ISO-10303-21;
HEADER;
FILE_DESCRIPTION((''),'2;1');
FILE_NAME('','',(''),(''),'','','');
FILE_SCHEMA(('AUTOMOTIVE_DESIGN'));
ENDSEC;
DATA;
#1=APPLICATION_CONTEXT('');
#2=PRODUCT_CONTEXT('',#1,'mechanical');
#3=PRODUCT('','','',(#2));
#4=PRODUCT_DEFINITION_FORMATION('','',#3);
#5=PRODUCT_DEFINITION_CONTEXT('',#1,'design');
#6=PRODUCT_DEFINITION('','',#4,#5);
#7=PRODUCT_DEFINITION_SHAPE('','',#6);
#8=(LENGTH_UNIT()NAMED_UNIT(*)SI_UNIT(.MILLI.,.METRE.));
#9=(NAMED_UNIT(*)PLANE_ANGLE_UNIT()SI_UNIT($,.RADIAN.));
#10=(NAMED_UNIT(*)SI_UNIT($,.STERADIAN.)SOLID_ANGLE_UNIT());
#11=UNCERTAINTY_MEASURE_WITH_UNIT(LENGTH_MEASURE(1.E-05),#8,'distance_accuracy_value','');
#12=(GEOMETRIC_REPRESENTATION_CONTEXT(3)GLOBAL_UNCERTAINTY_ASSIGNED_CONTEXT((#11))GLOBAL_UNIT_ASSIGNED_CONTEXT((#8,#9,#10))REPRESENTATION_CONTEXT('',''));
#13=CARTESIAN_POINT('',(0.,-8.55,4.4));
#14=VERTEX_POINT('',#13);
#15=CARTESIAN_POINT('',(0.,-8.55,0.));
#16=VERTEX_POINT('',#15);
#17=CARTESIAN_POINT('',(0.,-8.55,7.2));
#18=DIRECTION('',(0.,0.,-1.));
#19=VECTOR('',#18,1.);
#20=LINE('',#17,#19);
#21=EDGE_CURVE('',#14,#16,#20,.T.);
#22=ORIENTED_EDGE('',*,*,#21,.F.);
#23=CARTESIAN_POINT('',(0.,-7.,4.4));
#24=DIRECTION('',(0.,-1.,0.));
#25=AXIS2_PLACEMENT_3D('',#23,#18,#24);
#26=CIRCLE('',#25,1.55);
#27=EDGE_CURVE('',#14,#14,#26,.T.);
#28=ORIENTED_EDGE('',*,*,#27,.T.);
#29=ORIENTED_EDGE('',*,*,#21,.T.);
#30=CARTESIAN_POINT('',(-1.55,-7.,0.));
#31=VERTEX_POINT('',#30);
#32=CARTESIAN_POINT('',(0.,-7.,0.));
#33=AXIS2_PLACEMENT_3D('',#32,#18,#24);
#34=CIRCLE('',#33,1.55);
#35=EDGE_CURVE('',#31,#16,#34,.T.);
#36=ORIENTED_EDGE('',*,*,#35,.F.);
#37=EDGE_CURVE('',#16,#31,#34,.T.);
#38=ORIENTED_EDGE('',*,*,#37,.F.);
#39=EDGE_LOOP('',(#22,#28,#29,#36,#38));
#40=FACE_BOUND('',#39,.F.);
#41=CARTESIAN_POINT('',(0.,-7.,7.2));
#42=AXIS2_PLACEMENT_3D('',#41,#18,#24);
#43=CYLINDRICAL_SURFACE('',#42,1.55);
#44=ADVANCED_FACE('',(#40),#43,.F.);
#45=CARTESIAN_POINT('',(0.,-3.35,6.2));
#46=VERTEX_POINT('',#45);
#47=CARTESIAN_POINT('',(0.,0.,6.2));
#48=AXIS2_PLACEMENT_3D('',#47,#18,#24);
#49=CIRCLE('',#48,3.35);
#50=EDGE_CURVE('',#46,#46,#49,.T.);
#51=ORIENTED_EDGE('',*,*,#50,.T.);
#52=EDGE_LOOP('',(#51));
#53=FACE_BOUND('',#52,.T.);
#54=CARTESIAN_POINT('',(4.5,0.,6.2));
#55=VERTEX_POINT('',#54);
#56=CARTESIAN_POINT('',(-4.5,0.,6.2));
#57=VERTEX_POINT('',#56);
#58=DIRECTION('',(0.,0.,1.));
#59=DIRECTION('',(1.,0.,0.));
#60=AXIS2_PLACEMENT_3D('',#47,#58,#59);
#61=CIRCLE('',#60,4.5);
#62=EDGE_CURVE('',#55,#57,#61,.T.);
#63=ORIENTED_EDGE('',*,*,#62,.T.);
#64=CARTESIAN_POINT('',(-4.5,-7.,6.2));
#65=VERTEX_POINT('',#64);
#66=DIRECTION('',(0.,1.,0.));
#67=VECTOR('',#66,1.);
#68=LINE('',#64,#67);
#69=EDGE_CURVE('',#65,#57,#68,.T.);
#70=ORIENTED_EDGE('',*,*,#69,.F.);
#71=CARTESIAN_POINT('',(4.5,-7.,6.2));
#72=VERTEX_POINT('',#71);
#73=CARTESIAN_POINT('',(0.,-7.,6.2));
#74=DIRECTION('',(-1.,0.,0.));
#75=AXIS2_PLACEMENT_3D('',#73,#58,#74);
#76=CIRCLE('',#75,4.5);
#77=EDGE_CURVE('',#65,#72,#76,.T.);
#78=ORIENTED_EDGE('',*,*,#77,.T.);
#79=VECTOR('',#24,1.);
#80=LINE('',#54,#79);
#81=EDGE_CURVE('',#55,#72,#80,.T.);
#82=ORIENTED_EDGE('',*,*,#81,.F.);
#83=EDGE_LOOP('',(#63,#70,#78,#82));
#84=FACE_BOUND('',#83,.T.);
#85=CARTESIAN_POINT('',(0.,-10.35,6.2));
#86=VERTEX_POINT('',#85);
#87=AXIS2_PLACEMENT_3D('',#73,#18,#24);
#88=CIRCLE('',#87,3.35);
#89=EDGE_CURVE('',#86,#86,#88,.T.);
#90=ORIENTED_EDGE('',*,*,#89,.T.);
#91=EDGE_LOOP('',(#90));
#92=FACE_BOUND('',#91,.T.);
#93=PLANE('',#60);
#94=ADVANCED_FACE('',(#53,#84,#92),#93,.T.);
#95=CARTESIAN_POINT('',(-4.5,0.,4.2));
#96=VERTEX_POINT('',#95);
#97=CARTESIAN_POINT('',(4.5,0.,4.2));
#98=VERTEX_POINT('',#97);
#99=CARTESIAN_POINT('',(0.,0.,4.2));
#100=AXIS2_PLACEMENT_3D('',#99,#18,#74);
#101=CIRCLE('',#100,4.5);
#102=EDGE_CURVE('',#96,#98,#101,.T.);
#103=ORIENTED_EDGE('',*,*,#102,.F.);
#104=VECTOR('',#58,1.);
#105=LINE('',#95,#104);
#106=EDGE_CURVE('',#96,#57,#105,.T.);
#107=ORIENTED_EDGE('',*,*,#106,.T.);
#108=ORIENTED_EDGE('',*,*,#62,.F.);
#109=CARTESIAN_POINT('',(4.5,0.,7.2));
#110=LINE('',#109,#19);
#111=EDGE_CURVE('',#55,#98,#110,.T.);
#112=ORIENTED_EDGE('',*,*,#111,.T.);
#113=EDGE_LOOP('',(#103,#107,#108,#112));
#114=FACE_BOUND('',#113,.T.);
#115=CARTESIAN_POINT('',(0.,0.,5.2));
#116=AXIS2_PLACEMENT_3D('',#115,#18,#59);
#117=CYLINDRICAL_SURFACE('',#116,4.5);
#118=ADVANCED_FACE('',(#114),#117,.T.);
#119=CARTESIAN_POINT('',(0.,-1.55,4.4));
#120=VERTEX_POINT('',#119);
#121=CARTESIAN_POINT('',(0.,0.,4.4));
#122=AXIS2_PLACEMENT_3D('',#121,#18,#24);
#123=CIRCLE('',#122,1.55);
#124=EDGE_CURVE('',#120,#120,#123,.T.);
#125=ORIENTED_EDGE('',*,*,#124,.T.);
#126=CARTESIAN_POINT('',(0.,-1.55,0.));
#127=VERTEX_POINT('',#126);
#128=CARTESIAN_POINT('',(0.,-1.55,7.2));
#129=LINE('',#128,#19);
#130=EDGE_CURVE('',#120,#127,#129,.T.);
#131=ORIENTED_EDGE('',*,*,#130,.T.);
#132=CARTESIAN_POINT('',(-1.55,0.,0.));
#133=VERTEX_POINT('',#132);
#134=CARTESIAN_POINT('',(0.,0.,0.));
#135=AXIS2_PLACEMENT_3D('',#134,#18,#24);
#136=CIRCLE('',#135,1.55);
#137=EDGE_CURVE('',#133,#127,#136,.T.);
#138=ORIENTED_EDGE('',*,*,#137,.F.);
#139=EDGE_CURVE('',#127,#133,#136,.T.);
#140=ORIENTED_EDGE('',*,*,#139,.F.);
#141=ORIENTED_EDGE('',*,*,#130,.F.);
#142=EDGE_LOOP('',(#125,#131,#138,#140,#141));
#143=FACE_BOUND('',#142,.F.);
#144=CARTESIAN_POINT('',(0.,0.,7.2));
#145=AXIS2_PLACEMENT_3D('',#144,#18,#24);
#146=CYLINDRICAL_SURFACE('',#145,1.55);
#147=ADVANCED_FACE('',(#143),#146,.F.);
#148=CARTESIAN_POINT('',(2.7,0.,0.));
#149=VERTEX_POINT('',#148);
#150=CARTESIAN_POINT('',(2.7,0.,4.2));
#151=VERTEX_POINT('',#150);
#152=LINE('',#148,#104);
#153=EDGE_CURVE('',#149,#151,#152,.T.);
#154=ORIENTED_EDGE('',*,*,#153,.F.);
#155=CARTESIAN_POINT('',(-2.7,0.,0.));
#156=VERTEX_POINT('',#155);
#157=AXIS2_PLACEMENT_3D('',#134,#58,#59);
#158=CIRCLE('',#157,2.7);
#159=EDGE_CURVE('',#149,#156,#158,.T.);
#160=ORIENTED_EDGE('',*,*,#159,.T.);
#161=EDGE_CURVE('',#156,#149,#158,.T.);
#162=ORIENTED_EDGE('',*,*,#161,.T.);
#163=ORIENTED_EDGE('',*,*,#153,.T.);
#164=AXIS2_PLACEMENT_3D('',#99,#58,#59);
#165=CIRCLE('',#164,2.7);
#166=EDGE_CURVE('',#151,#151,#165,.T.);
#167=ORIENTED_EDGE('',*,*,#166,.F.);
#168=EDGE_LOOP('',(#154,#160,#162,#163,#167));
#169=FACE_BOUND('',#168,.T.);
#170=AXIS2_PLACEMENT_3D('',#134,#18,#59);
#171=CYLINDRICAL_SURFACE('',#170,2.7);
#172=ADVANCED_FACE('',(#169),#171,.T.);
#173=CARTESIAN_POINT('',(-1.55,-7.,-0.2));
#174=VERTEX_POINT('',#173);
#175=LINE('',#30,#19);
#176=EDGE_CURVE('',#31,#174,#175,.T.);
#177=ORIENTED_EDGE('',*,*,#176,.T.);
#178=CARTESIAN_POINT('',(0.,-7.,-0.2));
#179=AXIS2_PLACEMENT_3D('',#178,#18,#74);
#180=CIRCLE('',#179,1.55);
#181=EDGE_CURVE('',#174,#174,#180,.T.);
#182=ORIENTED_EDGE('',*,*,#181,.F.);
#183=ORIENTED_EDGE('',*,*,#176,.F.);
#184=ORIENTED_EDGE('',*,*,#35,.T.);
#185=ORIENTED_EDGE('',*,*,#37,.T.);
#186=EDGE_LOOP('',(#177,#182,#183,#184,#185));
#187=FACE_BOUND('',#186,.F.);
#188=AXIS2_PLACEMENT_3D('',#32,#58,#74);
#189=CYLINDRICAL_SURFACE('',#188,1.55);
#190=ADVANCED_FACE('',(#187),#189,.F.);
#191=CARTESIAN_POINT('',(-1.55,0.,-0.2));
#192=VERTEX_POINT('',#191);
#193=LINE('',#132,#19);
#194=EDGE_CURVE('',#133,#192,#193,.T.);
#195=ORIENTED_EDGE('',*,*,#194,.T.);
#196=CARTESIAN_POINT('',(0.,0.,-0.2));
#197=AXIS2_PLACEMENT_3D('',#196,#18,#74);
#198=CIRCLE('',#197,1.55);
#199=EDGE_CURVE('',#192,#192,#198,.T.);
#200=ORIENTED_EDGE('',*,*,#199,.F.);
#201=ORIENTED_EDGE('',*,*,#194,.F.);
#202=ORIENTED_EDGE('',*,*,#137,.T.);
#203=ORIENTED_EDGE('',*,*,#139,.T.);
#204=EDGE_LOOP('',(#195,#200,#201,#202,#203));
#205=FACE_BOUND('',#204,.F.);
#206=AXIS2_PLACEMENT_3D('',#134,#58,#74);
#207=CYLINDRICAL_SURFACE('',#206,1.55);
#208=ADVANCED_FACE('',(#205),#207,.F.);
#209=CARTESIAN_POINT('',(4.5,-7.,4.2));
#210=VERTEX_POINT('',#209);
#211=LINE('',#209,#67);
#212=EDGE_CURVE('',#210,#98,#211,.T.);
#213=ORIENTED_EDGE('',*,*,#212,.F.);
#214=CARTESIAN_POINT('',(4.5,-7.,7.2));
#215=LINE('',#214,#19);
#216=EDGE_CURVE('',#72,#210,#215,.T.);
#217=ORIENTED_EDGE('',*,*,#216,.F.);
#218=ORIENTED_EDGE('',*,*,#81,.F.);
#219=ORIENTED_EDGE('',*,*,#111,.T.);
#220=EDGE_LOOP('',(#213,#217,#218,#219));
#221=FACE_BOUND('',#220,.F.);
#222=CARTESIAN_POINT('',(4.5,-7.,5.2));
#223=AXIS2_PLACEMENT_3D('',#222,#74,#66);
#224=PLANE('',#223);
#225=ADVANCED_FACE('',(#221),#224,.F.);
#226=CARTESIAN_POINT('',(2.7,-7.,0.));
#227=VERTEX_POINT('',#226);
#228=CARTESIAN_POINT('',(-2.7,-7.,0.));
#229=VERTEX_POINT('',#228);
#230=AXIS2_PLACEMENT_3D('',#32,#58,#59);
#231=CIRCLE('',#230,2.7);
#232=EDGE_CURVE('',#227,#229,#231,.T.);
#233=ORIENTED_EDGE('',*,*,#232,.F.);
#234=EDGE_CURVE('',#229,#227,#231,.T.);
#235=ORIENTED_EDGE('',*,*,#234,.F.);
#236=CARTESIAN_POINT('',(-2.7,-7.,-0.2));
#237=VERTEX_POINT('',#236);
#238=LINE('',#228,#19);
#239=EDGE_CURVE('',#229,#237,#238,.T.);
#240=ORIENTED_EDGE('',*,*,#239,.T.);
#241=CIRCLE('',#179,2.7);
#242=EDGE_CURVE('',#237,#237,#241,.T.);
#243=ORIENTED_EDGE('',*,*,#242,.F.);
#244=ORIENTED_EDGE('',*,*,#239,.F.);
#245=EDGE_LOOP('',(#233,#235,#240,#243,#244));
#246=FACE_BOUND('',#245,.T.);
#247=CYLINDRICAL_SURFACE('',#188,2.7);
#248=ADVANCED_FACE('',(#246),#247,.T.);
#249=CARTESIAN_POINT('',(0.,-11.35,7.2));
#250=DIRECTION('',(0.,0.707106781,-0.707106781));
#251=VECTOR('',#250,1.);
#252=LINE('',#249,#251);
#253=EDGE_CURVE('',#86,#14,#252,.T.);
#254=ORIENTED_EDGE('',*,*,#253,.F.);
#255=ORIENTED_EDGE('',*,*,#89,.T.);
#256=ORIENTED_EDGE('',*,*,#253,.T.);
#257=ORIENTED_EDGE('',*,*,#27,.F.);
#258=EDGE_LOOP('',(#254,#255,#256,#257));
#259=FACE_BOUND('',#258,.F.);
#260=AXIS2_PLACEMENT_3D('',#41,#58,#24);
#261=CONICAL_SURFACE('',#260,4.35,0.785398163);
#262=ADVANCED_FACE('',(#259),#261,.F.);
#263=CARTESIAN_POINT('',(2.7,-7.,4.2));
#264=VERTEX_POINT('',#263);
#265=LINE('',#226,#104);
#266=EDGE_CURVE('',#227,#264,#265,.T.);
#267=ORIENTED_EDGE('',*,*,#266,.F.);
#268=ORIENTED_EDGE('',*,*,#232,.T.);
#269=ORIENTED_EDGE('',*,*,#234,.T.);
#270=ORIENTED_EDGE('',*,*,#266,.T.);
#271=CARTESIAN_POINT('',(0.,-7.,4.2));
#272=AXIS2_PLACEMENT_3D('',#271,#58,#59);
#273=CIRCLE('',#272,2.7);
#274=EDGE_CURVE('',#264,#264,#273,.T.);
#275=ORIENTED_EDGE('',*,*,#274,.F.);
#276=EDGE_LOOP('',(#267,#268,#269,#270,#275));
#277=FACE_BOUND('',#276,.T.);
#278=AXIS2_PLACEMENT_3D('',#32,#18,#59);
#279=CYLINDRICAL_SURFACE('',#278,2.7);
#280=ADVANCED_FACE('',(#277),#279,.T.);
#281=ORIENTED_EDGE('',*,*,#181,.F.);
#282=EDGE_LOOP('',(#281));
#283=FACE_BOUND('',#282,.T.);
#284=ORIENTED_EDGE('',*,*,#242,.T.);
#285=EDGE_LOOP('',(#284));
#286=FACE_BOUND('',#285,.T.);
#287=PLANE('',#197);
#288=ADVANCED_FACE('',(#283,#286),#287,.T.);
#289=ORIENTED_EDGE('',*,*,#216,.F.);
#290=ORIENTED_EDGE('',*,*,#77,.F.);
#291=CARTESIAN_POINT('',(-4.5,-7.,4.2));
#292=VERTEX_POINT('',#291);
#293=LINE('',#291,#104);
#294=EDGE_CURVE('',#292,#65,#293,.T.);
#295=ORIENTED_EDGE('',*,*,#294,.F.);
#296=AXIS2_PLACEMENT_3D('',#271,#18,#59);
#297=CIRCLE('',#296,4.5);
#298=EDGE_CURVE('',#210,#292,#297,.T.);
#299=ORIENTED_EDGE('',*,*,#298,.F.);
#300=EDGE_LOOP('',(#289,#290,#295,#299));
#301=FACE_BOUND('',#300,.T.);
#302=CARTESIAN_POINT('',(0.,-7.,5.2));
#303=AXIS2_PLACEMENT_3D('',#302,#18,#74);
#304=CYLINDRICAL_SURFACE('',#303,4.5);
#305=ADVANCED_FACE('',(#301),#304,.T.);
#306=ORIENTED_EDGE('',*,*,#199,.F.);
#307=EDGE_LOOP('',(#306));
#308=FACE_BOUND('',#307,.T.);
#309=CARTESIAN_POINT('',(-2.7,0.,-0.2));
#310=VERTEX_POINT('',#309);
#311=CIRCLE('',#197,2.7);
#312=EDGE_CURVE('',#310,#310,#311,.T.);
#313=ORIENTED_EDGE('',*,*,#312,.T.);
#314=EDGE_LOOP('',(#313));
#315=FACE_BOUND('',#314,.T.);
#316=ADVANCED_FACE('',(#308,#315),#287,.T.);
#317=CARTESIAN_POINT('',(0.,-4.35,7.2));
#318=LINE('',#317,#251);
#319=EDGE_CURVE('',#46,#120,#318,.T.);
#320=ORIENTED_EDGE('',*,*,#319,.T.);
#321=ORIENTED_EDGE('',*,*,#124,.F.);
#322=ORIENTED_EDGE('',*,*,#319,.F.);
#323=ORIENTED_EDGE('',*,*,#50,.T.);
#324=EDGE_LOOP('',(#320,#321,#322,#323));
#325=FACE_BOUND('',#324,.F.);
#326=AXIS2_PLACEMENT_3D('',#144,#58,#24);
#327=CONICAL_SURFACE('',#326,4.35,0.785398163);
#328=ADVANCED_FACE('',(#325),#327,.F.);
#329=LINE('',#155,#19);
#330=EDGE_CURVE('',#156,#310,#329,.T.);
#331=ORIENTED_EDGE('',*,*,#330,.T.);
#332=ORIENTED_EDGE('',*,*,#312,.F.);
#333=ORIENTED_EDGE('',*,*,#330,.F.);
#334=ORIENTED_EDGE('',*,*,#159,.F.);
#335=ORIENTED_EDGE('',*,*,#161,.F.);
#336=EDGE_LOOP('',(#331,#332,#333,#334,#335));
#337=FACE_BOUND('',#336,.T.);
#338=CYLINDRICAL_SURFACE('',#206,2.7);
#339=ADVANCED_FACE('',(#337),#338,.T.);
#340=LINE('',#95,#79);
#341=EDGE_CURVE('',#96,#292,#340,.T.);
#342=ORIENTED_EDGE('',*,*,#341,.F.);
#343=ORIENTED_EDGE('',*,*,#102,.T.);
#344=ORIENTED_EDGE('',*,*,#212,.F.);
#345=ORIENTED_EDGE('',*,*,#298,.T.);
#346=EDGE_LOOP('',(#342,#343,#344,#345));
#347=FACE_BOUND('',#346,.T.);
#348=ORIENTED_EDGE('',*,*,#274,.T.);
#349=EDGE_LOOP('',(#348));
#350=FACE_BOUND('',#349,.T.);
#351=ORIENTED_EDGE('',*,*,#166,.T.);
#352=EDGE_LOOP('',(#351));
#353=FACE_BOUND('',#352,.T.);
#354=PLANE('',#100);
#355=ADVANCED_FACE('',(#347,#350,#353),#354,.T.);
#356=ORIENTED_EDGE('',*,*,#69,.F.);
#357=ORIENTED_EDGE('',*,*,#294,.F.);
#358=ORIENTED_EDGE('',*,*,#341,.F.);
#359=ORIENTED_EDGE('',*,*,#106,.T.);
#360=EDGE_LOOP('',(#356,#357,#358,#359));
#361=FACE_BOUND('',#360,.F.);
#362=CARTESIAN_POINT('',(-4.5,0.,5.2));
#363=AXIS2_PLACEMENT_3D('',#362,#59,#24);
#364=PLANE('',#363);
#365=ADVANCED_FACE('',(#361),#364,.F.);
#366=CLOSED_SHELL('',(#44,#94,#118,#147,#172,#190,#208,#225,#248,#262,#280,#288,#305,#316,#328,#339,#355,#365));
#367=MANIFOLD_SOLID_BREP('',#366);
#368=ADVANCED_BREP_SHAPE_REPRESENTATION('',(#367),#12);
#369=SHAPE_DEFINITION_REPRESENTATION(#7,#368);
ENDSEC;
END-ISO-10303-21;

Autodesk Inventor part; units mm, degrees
ref_plane "YZ Plane" through (0, 0, 0) normal (1, 0, 0) x (0, 1, 0)
ref_plane "XZ Plane" through (0, 0, 0) normal (0, 1, 0) x (-1, 0, 0)
ref_plane "XY Plane" through (0, 0, 0) normal (0, 0, 1) x (1, 0, 0)
sketch "Skizze1" plane through (0, 0, 0) normal (0, 0, 1) x (1, 0, 0)
  circle A0 centre (0, 0) radius 2.7
  circle A1 centre (0, -7) radius 2.7
  dimension "d22" = 5.4
  dimension "d23" = 7
extrude "Extrusion1" add sketch "Skizze1" along normal blind 5.2
sketch "Skizze2" plane through (0, 0, 5.2) normal (0, 0, 1) x (1, 0, 0)
  arc A0 (-3, -7) -> (3, -7) centre (0, -7) ccw projected
  arc A1 (-3, -7) -> (3, -7) centre (0, -7) ccw projected
  line L0 (-3, 0) -> (-3, -7)
  arc A2 (3, 0) -> (-3, 0) centre (0, 0) ccw
  line L1 (3, -7) -> (3, 0)
  arc A3 (-3, -7) -> (3, -7) centre (0, -7) ccw
  line L2 (-3, 0) -> (-3, -7) projected
  arc A4 (-3, -7) -> (3, -7) centre (0, -7) ccw projected
  line L3 (3, -7) -> (3, 0) projected
  arc A5 (3, 0) -> (-3, 0) centre (0, 0) ccw projected
  line L4 (-3, 0) -> (-3, -7) projected
  line L5 (-3, 0) -> (-3, -7) projected
  arc A6 (-3, -7) -> (3, -7) centre (0, -7) ccw projected
  arc A7 (-3, -7) -> (3, -7) centre (0, -7) ccw projected
  line L6 (3, -7) -> (3, 0) projected
  line L7 (3, -7) -> (3, 0) projected
  arc A8 (3, 0) -> (-3, 0) centre (0, 0) ccw projected
  arc A9 (3, 0) -> (-3, 0) centre (0, 0) ccw projected
  line L8 (-4.5, 0) -> (-4.5, -7)
  arc A10 (-4.5, -7) -> (4.5, -7) centre (0, -7) ccw
  line L9 (4.5, -7) -> (4.5, 0)
  arc A11 (4.5, 0) -> (-4.5, 0) centre (0, 0) ccw
  dimension "d4" = 9
extrude "Extrusion2" add sketch "Skizze2" along normal blind 2 contours L0 A2 L1 A0 | A11 L9 A10 L8
sketch "Skizze3" plane through (0, 0, 7.2) normal (0, 0, 1) x (1, 0, 0)
  point P0 (0, 0)
  point P1 (0, 0)
  point P2 (0, -7)
  dimension "d7" = 7
hole "Bohrung1" at (0, 0, 7.2) at (0, -7, 7.2) direction (0, 0, -1) diameter 3.1 end through all
chamfer "Fasen1" distance 2.8 angle 45 2 edges at (0, 1.55, 7.2) (0, -5.45, 7.2)
sketch "Skizze5" plane through (0, 0, 5.2) normal (0, 0, -1) x (-1, 0, 0)
  circle A0 centre (0, -7) radius 2.7 projected
  line L0 (4.5, 0) -> (4.5, -7) projected
  arc A1 (-4.5, -7) -> (4.5, -7) centre (0, -7) ccw projected
  line L1 (-4.5, -7) -> (-4.5, 0) projected
  arc A2 (4.5, 0) -> (-4.5, 0) centre (0, 0) ccw projected
  circle A3 centre (0, 0) radius 2.7 projected
  circle A4 centre (0, -7) radius 2.35 projected
  circle A5 centre (0, 0) radius 2.35 projected
extrude "Extrusion4" add sketch "Skizze5" along normal blind 1 contours L0 A1 L1 A2
sketch "Skizze6" plane through (0, 0, 7.2) normal (0, 0, 1) x (1, 0, 0)
  arc A0 (-2.5831, -3.5) -> (2.5831, -3.5) centre (0, -7) ccw projected
  arc A1 (2.5831, -3.5) -> (-2.5831, -3.5) centre (0, 0) ccw projected
  arc A2 (-4.5, -7) -> (4.5, -7) centre (0, -7) ccw projected
  line L0 (-4.5, -7) -> (-4.5, 0) projected
  arc A3 (4.5, 0) -> (-4.5, 0) centre (0, 0) ccw projected
  line L1 (4.5, 0) -> (4.5, -7) projected
extrude "Extrusion5" cut sketch "Skizze6" against normal blind 1 contours A1 A0 | L0 A3 L1 A2
sketch "Skizze7" plane through (0, 0, 0) normal (0, 0, -1) x (-1, 0, 0)
  circle A0 centre (0, 0) radius 1.55 projected
  circle A1 centre (0, 0) radius 2.7 projected
  circle A2 centre (0, -7) radius 1.55 projected
  circle A3 centre (0, -7) radius 2.7 projected
extrude "Extrusion6" add sketch "Skizze7" along normal blind 0.2
properties part number "Stange halter"
